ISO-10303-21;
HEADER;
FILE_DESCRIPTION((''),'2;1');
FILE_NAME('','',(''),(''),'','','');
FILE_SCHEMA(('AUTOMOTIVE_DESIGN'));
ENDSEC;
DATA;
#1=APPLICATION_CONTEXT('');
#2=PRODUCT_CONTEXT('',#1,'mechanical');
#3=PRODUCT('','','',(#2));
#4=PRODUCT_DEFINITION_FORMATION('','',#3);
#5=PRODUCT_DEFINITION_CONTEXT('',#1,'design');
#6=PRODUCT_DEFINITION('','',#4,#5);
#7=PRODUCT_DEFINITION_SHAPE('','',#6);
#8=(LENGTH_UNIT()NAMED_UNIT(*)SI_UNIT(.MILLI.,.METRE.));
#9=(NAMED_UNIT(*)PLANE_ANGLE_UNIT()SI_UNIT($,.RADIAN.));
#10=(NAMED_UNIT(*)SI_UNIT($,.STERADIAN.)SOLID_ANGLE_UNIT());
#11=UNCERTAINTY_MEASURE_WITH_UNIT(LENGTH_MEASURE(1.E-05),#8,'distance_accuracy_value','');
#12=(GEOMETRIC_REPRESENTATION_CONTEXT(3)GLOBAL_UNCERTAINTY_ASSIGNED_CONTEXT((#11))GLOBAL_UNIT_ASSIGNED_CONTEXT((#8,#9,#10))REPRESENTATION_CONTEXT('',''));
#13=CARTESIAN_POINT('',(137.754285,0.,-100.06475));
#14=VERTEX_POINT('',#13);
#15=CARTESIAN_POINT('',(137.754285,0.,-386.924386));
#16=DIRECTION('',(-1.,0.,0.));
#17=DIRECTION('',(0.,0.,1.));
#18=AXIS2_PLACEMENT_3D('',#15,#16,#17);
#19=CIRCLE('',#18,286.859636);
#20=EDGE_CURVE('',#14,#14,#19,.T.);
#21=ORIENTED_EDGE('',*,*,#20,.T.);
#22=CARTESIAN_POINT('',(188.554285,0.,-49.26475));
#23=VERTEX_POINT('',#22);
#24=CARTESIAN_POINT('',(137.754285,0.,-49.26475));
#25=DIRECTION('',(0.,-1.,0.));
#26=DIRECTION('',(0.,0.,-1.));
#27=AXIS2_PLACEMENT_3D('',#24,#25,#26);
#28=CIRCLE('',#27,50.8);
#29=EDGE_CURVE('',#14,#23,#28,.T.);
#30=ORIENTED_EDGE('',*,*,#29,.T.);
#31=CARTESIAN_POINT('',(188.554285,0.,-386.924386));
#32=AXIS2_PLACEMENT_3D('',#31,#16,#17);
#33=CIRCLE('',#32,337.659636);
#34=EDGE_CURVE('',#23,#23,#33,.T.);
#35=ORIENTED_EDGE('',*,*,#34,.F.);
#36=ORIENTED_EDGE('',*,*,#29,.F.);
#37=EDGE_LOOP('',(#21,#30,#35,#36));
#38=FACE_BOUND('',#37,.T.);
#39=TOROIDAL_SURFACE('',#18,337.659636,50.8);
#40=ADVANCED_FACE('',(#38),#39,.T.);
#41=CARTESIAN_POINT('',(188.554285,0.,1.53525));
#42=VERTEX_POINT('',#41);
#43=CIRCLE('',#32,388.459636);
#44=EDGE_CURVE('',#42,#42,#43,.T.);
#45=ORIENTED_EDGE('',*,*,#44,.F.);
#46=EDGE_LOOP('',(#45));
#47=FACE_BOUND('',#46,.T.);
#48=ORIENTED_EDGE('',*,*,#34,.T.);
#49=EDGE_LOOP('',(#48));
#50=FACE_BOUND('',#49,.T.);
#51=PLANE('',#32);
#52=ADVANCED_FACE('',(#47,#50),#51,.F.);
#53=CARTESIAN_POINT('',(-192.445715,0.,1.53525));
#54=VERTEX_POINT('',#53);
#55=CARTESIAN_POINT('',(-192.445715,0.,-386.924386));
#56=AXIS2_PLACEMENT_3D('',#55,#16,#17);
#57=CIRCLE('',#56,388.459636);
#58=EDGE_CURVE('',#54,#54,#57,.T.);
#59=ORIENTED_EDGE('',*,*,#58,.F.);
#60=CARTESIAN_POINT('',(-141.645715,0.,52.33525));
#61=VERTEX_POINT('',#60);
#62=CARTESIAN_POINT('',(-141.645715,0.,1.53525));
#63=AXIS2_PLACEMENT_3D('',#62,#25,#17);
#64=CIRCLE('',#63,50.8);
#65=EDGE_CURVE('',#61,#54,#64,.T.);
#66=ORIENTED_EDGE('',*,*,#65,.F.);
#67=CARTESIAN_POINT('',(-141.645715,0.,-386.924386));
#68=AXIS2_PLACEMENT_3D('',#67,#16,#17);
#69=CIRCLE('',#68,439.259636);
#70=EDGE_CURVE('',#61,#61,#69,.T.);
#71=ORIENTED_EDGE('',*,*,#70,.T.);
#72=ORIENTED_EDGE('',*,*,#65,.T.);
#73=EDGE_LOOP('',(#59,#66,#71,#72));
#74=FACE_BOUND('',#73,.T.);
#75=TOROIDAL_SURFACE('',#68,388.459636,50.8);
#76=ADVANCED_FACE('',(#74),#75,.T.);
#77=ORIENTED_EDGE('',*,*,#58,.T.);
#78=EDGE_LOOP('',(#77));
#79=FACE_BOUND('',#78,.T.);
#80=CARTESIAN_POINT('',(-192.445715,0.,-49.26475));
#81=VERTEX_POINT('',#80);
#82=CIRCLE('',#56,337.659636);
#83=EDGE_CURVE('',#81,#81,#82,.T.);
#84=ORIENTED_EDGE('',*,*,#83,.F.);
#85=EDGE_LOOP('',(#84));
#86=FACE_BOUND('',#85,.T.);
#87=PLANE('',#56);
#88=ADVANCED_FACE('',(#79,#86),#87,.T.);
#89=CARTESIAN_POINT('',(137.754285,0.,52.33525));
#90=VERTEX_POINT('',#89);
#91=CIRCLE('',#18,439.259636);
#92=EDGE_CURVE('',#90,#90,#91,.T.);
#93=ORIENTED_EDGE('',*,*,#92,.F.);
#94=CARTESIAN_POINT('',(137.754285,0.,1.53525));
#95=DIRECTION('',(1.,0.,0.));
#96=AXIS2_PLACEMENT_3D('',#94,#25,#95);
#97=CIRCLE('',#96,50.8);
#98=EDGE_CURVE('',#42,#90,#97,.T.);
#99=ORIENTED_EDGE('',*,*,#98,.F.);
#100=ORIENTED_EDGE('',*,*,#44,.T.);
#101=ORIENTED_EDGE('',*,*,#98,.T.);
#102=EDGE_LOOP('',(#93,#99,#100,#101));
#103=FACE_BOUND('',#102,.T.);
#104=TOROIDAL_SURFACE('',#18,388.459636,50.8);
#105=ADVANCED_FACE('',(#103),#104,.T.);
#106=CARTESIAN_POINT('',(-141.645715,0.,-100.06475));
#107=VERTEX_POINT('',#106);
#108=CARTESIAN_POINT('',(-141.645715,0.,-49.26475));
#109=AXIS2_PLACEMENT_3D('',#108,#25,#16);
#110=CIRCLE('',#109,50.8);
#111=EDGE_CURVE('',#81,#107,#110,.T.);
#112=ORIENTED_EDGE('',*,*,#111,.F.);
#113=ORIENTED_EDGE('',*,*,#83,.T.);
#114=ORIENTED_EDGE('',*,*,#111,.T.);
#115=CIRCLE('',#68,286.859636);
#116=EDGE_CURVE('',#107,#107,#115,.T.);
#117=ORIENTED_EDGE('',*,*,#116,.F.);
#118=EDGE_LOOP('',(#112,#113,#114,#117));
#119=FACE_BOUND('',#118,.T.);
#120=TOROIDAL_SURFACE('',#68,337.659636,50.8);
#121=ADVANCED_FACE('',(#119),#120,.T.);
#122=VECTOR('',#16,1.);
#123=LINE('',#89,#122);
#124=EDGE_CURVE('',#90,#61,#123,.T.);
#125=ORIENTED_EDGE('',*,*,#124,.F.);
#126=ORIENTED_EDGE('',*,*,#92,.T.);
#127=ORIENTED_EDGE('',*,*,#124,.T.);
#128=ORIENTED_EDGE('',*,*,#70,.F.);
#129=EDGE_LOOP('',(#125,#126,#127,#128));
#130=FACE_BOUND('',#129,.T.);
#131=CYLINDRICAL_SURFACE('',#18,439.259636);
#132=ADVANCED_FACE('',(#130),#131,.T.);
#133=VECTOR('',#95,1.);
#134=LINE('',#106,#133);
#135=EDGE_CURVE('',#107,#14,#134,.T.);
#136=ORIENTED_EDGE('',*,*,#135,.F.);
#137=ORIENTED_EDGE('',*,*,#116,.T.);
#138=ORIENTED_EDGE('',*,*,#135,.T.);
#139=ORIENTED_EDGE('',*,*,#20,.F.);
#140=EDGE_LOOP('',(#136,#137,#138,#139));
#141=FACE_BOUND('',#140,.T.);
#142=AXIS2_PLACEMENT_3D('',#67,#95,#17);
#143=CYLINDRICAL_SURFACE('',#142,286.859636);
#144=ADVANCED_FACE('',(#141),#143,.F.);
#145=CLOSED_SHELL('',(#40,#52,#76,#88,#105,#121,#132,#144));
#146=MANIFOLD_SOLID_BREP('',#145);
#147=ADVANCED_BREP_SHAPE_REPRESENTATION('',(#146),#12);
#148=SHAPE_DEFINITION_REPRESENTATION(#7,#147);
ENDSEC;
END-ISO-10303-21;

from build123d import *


# Not quite as in the source:
# - the program builds the solid bodies; features that only make, move or delete a surface that nothing else refers to are left out


with BuildPart() as f4:
    # F0 (on Front) → F4 (revolve)
    with BuildSketch(Plane.XZ):
        with BuildLine():
            ThreePointArc((-192.4457153976, -49.2647496334), (-177.5667398819, -85.1857741176), (-141.6457153976, -100.0647496334))
            Line((-141.6457153976, -100.0647496334), (137.7542846024, -100.0647496334))
            ThreePointArc((137.7542846024, -100.0647496334), (173.6753090867, -85.1857741176), (188.5542846024, -49.2647496334))
            Line((188.5542846024, -49.2647496334), (188.5542846024, 1.5352503666))
            ThreePointArc((188.5542846024, 1.5352503666), (173.6753090867, 37.4562748509), (137.7542846024, 52.3352503666))
            Line((137.7542846024, 52.3352503666), (-141.6457153976, 52.3352503666))
            ThreePointArc((-141.6457153976, 52.3352503666), (-177.5667398819, 37.4562748509), (-192.4457153976, 1.5352503666))
            Line((-192.4457153976, 1.5352503666), (-192.4457153976, -49.2647496334))
        make_face()
    revolve(axis=Axis((-11.0372006893, 0, -386.9243860245), (-1, 0, 0)))


solid = f4.part
